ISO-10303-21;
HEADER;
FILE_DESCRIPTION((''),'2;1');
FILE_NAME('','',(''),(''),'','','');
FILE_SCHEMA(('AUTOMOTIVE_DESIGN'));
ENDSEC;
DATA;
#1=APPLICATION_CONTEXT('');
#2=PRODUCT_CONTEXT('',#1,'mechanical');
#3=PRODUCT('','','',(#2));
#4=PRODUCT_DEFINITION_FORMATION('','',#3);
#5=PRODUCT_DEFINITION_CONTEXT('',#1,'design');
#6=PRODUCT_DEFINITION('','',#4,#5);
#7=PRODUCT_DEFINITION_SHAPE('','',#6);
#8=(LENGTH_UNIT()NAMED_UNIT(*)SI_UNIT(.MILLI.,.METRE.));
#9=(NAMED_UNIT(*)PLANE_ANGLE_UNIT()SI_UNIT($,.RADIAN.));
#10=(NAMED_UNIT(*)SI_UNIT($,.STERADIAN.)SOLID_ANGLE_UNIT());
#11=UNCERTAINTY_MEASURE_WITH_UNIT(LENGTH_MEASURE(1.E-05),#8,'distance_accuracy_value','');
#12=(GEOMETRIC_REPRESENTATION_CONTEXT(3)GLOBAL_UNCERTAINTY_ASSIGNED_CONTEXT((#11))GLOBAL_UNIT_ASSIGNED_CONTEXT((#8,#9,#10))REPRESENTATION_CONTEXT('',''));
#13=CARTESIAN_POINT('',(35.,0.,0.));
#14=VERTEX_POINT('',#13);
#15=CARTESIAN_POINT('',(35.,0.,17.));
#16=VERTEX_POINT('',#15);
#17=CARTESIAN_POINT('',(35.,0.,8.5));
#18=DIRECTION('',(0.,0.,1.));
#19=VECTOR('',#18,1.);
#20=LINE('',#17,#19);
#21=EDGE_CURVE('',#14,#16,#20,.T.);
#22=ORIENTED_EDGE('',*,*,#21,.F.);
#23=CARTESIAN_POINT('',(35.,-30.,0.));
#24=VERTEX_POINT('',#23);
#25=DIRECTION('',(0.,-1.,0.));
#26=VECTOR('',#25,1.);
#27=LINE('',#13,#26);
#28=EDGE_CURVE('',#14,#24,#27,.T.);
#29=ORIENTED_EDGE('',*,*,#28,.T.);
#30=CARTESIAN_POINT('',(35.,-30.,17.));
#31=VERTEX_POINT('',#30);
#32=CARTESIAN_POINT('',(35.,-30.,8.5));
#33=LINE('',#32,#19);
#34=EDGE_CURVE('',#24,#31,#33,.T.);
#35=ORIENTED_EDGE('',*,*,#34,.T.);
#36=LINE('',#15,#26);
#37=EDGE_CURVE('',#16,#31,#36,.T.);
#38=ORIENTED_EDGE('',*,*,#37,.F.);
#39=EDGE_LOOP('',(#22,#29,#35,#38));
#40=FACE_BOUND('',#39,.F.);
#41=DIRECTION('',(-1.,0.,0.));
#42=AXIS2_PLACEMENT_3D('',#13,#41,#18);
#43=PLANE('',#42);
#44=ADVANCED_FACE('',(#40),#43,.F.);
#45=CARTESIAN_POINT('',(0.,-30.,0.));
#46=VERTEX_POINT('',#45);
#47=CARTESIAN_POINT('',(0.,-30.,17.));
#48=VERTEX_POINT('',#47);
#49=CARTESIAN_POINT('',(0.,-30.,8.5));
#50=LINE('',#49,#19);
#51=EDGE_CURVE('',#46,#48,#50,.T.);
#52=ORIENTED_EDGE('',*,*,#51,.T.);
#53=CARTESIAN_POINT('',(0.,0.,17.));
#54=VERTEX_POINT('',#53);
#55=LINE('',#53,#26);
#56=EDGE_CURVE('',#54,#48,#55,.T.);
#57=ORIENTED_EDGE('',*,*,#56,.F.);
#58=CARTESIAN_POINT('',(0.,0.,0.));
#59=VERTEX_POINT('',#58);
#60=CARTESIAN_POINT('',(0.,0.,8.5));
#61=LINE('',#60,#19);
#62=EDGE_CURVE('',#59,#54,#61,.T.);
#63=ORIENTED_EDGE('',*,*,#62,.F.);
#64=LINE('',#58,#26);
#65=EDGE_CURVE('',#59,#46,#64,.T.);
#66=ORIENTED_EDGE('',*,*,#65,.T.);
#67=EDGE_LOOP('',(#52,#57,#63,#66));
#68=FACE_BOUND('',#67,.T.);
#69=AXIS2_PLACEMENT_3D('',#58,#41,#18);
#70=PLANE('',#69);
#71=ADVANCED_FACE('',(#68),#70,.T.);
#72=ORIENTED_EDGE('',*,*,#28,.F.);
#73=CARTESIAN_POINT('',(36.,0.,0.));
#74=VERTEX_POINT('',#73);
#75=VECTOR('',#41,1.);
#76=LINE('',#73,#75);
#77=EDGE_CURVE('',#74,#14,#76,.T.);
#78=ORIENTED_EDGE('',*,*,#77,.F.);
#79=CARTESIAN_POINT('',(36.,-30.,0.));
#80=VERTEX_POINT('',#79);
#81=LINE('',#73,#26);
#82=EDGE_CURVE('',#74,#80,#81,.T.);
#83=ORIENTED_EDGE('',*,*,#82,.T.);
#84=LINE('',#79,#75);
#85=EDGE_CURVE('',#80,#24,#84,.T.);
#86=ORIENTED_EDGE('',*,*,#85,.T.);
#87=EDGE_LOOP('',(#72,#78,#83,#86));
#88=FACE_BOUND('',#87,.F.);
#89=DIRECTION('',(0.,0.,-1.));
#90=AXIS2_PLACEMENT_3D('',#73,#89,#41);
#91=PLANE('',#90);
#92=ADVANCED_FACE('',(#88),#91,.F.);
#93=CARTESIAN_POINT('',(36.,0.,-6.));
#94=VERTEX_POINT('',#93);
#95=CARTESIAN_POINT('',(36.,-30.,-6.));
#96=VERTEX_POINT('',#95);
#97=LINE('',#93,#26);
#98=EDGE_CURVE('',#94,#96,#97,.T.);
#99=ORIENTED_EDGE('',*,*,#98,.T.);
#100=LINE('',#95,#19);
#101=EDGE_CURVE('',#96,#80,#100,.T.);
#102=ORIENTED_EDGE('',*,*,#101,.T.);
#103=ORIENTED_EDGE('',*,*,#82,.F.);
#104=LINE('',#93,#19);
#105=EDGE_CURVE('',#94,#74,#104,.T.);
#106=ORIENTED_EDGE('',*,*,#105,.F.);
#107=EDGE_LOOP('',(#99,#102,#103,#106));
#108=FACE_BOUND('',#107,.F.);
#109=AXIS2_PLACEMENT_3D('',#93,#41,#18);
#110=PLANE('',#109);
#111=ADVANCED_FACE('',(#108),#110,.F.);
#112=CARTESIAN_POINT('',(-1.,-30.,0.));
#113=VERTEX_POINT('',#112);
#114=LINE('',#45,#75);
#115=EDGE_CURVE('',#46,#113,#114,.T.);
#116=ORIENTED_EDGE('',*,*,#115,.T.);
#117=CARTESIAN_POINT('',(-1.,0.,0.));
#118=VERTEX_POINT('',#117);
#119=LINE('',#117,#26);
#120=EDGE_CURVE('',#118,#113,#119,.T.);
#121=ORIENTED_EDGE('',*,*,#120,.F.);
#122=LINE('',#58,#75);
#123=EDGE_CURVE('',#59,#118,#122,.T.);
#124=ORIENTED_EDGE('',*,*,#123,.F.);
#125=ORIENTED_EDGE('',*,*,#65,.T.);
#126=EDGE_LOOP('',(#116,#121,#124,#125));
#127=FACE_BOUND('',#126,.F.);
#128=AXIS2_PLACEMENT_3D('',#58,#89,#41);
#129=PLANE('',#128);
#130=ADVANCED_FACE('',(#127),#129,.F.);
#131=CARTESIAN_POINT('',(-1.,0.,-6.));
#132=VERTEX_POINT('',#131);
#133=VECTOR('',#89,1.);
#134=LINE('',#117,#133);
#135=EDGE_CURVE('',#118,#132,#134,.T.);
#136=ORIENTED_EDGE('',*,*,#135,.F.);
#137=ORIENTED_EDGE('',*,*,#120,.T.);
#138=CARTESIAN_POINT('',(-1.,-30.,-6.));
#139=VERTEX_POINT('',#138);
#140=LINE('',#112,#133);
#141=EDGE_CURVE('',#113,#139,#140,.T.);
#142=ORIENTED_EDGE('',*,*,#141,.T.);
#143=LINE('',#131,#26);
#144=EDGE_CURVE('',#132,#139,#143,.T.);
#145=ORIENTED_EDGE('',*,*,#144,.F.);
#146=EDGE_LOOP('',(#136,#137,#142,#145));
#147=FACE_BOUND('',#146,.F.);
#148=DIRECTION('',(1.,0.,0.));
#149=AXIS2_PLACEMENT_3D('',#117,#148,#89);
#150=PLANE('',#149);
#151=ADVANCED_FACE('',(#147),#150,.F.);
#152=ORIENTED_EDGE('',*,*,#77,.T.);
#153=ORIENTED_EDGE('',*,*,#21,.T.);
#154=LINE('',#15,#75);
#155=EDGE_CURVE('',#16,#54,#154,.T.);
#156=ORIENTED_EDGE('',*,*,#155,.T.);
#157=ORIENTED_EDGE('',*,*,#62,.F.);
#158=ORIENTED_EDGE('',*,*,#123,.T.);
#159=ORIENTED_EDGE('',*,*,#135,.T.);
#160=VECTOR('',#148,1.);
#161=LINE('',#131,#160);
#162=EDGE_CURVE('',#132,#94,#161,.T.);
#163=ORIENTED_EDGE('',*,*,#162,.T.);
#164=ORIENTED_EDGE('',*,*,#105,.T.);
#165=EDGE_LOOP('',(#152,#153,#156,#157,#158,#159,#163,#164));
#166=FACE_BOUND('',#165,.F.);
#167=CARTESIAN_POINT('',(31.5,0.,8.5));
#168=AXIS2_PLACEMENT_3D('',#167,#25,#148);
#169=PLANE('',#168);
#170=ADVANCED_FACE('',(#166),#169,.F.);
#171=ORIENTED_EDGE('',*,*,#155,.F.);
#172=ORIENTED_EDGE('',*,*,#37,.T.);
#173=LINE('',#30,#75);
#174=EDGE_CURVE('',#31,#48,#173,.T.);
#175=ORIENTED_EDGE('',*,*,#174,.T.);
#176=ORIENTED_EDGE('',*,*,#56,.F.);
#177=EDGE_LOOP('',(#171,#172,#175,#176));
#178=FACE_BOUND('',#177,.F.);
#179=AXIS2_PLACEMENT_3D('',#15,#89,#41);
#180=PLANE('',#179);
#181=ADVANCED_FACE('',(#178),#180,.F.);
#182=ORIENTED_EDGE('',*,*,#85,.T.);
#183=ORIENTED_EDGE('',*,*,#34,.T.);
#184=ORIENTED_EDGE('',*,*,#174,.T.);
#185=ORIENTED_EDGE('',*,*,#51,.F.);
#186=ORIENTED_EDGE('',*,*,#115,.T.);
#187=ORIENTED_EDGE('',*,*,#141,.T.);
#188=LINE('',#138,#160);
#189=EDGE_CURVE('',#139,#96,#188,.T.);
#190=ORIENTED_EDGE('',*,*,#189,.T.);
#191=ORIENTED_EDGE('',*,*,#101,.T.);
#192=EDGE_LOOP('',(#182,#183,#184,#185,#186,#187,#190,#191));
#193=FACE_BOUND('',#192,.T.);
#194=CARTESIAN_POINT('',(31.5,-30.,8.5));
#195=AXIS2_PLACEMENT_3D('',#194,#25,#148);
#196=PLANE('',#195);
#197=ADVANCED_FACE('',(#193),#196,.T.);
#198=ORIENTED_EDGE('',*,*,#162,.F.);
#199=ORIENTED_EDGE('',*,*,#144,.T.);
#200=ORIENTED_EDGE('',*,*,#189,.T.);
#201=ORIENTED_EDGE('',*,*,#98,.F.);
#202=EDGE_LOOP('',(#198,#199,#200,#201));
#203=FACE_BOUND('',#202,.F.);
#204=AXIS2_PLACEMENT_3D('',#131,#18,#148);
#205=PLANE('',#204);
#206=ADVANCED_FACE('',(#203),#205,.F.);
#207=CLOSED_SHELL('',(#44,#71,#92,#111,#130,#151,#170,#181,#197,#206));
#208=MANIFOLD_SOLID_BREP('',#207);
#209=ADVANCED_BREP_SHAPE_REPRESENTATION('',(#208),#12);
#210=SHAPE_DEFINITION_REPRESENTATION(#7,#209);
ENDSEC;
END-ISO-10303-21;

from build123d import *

# Parameters (mm, degrees)
F0_W     = 7
F0_H     = 17
F0_W_2   = 37
F0_H_2   = 2
F1_DEPTH = 30


# Not quite as in the source:
# - a feature names something its author has since deleted; it is built from what else it names


with BuildPart() as f1:
    # F0 (on Front) → F1 (new body)
    with BuildSketch(Plane.XZ):
        with Locations((31.5, 8.5)):
            Rectangle(F0_W, F0_H)
        with Locations((3.5, 8.5)):
            Rectangle(F0_W, F0_H)
        with Locations((17.5, 8.5)):
            Rectangle(F0_W, F0_H)
        with Locations((17.5, -3)):
            Rectangle(F0_W_2, F0_H_2)
        with Locations((10.5, 8.5)):
            Rectangle(F0_W, F0_H)
        Polygon((36, -4), (-1, -4), (-1, -6), (0, -6), (35, -6), (36, -6), align=None)
        Polygon((7, 0), (0, 0), (-1, 0), (-1, -2), (36, -2), (36, 0), (35, 0), (28, 0), (21, 0), (14, 0), align=None)
        with Locations((24.5, 8.5)):
            Rectangle(F0_W, F0_H)
    extrude(amount=F1_DEPTH)


solid = f1.part
